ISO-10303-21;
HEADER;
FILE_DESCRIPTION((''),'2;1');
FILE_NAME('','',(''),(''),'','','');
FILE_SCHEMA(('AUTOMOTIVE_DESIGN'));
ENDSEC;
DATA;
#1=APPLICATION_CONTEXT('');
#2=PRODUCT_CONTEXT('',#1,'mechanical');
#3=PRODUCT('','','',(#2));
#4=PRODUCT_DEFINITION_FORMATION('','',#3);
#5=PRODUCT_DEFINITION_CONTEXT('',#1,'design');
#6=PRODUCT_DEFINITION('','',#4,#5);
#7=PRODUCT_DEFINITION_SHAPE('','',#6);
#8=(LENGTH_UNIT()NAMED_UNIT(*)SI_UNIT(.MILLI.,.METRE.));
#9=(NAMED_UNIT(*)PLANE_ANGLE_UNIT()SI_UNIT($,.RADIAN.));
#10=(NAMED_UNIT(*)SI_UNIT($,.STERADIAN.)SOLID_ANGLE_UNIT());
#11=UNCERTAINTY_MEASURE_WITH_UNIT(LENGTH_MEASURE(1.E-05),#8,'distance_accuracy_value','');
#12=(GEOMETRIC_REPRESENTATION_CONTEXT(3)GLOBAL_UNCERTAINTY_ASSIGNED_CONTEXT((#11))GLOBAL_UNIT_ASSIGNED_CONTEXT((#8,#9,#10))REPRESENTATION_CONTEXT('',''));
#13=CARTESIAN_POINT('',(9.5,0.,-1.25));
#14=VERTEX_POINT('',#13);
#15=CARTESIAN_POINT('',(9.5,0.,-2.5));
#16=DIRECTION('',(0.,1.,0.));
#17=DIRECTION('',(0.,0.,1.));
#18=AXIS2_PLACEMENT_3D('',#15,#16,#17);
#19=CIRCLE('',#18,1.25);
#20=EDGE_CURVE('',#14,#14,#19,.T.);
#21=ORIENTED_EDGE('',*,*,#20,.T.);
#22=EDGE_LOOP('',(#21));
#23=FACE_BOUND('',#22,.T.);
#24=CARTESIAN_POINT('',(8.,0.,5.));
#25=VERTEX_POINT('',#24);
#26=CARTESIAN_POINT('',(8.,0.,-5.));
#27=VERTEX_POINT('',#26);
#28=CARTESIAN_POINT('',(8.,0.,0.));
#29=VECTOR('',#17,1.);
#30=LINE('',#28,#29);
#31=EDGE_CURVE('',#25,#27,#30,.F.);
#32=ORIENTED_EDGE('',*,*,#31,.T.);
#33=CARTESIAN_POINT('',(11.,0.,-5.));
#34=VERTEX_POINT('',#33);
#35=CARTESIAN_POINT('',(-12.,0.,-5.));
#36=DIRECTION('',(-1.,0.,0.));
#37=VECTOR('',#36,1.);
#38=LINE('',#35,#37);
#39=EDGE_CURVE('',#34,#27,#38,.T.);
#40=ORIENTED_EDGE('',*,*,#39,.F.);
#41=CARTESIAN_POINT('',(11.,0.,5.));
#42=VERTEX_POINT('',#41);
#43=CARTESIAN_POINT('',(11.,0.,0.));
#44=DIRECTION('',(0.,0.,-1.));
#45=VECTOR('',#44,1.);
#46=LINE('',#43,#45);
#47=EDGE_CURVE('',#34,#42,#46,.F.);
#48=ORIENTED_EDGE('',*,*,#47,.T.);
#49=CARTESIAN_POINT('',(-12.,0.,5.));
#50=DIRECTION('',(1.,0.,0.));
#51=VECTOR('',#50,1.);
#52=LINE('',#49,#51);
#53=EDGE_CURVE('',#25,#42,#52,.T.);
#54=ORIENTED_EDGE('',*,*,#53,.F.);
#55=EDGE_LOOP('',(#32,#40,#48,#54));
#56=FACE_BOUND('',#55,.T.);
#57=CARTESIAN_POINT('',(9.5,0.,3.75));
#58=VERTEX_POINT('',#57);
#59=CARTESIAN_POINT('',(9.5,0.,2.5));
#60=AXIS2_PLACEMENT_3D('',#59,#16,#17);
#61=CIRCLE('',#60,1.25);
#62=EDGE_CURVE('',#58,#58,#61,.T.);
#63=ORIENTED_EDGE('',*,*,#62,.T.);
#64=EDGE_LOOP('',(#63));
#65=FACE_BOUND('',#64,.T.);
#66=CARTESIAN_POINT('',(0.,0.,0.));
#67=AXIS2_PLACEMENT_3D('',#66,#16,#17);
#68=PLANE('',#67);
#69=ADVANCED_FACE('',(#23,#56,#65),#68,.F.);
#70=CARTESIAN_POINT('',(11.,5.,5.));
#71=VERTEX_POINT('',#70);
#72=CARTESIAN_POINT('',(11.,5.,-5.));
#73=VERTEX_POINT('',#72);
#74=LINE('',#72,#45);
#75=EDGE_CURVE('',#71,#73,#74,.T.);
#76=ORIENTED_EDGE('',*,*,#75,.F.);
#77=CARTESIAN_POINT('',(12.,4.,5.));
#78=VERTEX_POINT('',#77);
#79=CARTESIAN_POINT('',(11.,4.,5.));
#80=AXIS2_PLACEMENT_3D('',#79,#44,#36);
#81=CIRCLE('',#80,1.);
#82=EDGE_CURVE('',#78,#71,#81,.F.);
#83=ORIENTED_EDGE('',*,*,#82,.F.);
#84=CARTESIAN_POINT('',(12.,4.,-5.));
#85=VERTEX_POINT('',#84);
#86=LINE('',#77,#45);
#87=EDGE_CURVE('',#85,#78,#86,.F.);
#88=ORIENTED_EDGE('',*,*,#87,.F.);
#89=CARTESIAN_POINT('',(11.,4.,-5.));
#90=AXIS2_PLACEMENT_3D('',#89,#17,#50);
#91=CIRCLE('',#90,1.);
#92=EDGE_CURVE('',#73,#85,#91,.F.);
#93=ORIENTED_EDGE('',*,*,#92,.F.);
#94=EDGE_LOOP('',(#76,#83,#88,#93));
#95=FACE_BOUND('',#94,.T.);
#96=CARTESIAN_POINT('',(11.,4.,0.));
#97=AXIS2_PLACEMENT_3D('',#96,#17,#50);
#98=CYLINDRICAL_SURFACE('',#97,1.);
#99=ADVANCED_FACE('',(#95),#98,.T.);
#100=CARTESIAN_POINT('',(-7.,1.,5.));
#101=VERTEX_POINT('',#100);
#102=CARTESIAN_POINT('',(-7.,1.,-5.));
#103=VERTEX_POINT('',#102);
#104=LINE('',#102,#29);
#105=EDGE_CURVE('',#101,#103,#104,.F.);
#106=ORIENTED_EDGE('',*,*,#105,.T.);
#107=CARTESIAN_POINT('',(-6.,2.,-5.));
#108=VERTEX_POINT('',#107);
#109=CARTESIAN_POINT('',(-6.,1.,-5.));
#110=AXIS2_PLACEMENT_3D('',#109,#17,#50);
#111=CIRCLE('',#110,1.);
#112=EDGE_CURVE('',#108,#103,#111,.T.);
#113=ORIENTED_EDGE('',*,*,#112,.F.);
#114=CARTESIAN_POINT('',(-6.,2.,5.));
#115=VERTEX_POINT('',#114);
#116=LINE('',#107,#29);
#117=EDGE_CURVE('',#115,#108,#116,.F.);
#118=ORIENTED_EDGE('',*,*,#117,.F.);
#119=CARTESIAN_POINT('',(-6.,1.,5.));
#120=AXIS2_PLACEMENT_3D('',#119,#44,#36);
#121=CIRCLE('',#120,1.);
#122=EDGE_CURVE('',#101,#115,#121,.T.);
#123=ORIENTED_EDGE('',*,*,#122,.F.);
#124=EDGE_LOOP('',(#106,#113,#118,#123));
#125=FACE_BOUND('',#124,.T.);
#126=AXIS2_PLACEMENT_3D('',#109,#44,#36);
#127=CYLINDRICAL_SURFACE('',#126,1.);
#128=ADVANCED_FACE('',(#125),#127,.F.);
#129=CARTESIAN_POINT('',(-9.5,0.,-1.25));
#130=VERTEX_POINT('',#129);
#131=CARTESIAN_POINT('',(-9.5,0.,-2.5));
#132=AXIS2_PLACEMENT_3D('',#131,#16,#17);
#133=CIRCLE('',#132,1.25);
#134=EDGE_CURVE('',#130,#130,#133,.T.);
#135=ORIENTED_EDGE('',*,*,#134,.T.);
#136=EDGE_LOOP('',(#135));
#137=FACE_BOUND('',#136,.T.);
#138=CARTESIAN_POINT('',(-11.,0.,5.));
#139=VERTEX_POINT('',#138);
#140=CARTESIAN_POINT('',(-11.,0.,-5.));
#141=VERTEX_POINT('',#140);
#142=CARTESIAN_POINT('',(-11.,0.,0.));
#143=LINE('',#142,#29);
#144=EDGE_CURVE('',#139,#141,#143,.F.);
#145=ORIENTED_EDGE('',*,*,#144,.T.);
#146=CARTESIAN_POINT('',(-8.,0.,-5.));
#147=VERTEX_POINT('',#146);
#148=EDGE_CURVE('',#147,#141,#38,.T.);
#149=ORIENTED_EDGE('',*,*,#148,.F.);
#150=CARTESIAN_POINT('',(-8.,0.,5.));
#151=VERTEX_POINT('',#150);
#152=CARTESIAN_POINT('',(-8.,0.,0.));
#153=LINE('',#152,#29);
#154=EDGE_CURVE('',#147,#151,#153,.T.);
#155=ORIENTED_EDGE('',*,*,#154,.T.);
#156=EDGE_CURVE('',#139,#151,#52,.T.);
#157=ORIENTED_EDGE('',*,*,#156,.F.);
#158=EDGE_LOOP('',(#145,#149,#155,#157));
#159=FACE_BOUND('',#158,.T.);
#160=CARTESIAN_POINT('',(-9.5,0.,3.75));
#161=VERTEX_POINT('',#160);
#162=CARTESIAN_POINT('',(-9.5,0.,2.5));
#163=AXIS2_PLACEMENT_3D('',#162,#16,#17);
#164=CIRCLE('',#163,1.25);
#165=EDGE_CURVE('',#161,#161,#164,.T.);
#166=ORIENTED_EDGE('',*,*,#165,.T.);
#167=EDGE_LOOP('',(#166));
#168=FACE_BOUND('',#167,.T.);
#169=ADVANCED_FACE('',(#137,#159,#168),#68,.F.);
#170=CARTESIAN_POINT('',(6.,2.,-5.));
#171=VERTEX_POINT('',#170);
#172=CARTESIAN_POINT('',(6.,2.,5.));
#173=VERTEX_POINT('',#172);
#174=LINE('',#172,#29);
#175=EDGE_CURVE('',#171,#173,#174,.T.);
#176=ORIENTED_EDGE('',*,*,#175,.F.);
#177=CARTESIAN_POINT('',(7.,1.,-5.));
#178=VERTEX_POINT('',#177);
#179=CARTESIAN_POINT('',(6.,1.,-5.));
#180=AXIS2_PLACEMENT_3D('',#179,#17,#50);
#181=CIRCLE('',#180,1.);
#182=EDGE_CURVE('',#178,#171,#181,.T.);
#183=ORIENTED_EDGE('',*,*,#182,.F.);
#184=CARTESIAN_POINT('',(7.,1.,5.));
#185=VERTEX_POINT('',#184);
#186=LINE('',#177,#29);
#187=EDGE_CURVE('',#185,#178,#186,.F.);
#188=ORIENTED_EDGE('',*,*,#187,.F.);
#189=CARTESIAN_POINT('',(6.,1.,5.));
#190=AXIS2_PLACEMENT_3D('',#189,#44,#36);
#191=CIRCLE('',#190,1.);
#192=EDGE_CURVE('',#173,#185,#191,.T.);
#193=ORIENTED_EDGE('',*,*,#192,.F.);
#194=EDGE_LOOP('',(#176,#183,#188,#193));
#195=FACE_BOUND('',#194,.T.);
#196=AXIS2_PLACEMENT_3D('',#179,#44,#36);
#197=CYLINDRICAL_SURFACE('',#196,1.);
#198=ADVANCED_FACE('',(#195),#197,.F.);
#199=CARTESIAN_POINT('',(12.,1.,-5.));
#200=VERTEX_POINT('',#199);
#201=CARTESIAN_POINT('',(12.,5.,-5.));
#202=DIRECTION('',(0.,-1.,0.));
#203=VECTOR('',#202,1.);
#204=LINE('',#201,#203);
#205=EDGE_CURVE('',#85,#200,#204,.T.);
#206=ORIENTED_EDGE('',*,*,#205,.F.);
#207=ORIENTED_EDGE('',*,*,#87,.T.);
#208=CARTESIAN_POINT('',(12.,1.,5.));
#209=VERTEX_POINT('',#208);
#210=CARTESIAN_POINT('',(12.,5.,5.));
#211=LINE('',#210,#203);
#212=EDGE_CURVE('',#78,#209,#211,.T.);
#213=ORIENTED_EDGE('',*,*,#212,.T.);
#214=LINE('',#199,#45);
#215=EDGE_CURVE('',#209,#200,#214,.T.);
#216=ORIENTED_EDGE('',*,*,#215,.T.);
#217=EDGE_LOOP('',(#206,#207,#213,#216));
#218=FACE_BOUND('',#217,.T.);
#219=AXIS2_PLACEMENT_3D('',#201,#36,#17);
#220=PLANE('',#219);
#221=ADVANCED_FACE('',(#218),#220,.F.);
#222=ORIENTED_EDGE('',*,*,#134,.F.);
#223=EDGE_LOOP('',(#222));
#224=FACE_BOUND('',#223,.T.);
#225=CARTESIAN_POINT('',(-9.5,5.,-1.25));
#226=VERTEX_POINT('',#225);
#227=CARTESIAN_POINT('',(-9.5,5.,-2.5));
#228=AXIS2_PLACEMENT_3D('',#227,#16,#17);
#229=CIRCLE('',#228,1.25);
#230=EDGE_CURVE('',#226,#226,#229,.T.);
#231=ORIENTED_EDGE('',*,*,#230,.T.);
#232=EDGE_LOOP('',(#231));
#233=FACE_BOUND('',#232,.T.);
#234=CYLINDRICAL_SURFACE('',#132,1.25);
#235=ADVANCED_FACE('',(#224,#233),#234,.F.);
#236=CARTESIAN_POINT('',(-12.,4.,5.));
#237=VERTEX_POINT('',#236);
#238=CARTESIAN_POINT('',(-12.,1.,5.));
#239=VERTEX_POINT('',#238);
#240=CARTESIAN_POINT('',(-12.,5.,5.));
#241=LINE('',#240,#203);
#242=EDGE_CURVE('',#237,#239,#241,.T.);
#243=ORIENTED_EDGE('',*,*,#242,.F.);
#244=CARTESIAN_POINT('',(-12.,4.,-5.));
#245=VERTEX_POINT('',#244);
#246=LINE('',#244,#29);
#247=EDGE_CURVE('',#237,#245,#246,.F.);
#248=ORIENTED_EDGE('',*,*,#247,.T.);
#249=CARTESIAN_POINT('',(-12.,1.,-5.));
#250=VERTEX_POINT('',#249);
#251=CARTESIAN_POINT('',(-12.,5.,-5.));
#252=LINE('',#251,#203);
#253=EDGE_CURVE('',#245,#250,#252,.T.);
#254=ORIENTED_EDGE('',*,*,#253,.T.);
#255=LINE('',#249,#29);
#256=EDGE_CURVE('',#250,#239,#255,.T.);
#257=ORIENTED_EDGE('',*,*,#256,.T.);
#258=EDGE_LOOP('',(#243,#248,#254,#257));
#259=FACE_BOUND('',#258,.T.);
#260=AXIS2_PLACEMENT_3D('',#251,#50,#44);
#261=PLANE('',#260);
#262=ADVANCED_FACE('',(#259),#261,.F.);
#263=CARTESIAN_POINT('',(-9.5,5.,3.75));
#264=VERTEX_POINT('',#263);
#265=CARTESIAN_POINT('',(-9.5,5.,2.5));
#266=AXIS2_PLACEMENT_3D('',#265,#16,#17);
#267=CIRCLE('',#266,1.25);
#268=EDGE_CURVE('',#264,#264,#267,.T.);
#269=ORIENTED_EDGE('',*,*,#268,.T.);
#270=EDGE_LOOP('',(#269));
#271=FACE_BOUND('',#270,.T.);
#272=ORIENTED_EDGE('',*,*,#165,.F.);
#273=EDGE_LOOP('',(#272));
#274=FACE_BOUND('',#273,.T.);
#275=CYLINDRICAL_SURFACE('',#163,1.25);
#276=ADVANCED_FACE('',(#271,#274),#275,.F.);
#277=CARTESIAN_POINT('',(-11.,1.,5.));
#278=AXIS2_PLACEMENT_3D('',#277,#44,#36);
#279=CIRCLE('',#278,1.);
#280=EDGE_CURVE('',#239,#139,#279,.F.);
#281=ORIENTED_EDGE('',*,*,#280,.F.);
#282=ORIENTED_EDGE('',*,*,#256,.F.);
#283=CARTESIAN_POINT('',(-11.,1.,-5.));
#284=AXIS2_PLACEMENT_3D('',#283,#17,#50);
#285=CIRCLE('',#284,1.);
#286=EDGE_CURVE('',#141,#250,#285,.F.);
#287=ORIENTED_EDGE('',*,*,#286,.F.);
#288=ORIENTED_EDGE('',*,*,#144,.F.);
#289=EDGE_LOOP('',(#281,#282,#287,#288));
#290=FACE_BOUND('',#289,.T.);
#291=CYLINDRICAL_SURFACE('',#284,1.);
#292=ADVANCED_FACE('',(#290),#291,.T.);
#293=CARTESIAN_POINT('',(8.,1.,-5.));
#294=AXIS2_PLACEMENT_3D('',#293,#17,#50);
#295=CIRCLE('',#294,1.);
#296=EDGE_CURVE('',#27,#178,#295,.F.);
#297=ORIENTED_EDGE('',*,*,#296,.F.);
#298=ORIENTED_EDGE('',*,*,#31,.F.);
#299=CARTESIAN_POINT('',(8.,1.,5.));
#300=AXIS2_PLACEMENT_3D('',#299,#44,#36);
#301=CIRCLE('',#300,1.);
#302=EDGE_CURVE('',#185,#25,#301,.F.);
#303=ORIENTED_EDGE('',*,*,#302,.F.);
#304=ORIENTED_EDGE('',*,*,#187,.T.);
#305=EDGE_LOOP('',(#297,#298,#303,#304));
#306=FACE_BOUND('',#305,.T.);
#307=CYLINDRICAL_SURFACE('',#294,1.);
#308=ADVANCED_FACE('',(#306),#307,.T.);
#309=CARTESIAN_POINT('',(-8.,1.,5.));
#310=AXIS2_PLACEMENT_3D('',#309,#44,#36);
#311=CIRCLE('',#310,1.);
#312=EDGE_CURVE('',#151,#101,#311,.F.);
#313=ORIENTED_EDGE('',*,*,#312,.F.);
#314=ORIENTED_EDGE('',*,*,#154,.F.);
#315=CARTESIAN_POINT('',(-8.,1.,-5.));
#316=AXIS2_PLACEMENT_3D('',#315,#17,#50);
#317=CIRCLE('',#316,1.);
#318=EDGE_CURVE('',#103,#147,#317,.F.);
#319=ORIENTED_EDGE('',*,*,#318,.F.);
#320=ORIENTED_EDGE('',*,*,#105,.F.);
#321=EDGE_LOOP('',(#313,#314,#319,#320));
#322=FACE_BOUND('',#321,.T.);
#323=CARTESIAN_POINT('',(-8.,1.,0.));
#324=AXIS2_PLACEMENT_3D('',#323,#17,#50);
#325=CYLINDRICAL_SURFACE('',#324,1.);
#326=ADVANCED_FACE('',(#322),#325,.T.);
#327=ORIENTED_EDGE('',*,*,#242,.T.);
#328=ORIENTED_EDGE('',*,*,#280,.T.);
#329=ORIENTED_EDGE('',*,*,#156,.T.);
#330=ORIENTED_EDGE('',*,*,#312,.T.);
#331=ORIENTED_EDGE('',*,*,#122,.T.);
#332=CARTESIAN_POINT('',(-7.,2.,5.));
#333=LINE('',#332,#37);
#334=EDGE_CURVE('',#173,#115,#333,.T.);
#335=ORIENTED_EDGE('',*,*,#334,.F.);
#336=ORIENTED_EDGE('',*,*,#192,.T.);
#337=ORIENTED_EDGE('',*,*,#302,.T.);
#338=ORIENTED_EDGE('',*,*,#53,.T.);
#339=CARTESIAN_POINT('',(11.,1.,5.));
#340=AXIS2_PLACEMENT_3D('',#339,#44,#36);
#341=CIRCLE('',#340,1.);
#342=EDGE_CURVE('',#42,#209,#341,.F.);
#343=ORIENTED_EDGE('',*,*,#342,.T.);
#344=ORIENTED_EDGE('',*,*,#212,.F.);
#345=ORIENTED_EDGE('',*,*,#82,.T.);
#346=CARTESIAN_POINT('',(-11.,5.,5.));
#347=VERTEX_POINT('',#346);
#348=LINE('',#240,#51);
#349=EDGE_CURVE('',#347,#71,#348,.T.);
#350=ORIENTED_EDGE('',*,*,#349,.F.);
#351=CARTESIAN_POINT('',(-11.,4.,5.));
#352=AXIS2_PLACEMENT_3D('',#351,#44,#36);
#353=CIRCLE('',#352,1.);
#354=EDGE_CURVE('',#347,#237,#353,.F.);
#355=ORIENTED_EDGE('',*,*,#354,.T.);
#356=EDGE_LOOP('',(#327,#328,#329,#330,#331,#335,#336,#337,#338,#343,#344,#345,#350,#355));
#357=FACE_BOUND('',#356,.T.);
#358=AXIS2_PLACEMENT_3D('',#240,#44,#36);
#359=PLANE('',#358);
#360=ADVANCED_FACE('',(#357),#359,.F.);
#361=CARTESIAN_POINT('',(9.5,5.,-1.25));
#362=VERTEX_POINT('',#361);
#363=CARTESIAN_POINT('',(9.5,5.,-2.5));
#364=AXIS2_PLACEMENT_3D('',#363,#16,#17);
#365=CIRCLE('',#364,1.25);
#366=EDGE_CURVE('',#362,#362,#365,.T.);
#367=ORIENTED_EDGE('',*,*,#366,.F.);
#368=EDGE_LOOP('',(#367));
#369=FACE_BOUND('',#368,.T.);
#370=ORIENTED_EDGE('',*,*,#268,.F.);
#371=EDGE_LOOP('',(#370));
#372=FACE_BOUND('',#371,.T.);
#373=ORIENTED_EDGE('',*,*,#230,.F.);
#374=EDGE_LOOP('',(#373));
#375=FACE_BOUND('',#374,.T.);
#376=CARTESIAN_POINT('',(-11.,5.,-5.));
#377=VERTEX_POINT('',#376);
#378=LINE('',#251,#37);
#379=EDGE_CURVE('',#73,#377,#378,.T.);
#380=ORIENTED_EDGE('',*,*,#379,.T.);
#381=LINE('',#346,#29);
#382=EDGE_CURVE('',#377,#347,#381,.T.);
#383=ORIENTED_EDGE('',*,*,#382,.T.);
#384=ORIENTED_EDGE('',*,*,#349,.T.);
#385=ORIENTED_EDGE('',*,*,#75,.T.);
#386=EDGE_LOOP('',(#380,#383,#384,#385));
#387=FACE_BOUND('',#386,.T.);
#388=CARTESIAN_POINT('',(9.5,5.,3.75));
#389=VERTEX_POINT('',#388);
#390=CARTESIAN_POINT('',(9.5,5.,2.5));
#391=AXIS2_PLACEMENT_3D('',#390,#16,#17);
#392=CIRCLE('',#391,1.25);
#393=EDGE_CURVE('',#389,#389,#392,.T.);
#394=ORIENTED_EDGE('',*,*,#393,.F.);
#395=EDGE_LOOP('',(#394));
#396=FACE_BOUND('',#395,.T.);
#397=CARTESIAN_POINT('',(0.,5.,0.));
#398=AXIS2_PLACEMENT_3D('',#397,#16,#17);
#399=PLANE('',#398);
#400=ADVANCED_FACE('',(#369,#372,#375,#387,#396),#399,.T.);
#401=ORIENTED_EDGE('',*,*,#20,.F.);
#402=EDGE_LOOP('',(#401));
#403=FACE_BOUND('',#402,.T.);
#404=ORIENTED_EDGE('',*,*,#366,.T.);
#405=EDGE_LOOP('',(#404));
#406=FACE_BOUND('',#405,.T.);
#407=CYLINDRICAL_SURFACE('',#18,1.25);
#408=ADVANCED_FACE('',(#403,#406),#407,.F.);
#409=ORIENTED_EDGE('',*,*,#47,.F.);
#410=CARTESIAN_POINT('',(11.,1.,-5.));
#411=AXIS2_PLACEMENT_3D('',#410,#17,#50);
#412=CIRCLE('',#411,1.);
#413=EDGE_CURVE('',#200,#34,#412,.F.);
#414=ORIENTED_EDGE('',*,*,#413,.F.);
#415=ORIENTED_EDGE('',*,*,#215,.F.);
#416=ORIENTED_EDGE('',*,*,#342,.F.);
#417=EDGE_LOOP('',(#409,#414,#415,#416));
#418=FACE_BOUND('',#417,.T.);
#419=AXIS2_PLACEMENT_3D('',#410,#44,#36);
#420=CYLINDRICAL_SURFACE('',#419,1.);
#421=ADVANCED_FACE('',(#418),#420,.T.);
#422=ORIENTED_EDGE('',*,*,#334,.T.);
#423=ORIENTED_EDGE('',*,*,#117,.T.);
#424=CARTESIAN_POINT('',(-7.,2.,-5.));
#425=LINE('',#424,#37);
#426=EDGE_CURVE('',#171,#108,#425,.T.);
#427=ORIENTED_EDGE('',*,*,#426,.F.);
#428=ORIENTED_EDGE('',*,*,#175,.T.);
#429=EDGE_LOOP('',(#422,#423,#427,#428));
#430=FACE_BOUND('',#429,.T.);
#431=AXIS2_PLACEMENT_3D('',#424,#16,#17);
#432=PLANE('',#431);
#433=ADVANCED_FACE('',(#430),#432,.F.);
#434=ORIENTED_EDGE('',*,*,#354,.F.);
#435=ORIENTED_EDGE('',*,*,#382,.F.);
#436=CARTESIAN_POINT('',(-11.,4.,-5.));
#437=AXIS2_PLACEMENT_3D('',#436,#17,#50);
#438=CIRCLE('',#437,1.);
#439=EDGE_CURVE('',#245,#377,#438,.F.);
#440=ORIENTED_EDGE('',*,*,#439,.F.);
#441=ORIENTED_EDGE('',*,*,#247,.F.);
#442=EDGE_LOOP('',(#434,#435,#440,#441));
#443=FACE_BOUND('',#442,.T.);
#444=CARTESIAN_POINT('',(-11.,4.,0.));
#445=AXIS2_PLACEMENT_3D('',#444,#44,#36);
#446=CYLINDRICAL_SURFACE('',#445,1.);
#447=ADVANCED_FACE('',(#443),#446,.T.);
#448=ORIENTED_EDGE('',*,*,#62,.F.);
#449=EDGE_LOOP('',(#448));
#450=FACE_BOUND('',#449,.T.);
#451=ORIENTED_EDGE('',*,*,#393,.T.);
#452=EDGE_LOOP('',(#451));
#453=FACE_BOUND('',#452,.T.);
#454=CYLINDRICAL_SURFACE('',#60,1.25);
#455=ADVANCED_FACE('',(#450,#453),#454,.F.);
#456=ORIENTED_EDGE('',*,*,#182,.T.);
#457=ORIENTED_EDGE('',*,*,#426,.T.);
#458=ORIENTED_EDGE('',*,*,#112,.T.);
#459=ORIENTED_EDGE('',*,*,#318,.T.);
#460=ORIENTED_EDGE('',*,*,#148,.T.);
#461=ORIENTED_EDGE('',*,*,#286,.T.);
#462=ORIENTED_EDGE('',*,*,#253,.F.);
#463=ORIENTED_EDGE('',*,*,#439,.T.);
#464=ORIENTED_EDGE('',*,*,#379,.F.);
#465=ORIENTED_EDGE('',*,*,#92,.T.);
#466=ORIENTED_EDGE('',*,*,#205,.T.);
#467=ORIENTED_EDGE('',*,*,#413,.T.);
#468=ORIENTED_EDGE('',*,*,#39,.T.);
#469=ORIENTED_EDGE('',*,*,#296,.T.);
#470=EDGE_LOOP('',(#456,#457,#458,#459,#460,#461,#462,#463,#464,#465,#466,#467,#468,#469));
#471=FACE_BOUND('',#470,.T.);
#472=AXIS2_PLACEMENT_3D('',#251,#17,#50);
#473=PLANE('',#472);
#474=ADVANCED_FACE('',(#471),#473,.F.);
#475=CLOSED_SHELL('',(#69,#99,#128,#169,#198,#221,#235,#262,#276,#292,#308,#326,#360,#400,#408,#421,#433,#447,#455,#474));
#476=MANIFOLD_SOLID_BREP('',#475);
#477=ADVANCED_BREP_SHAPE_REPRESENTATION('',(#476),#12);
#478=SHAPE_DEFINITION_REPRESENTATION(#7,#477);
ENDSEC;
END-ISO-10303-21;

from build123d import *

# Parameters (mm, degrees)
SKETCH1_W           = 24
SKETCH1_H           = 10
BOSS_EXTRUDE1_DEPTH = 5
SKETCH2_W           = 14
SKETCH2_H           = 2
CUT_EXTRUDE1_DEPTH  = 17.401219467
FILLET1_R           = 1
SKETCH3_R           = 1.25
CUT_EXTRUDE2_DEPTH  = 14.928388277


with BuildPart() as part:
    # Sketch1 → Boss-Extrude1 (new body)
    with BuildSketch(Plane(origin=(0, 0, 0), x_dir=(1, 0, 0), z_dir=(0, 1, 0))):
        Rectangle(SKETCH1_W, SKETCH1_H)
    extrude(amount=BOSS_EXTRUDE1_DEPTH)

    # Sketch2 → Cut-Extrude1 (cut, through all)
    with BuildSketch(Plane.XY.offset(5)):
        with Locations((0, 1)):
            Rectangle(SKETCH2_W, SKETCH2_H)
    extrude(amount=-CUT_EXTRUDE1_DEPTH, mode=Mode.SUBTRACT)

    # Fillet1
    fillet1_edges = [part.edges().sort_by_distance(p)[0] for p in [
        (-12, 0, 0),
        (-12, 5, 0),
        (12, 5, 0),
        (12, 0, 0),
        (7, 0, 0),
        (7, 2, 0),
        (-7, 2, 0),
        (-7, 0, 0),
    ]]
    fillet(fillet1_edges, radius=FILLET1_R - 0.0001)  # a hair under: the kernel refuses the full size

    # Sketch3 → Cut-Extrude2 (cut, through all)
    with BuildSketch(Plane(origin=(0, 5, 0), x_dir=(1, 0, 0), z_dir=(0, 1, 0))):
        with Locations(Location((-9.5, 2.5, 0), (0, 0, 270))):
            Circle(SKETCH3_R)
        with Locations(Location((9.5, 2.5, 0), (0, 0, 270))):
            Circle(SKETCH3_R)
        with Locations(Location((-9.5, -2.5, 0), (0, 0, 270))):
            Circle(SKETCH3_R)
        with Locations(Location((9.5, -2.5, 0), (0, 0, 270))):
            Circle(SKETCH3_R)
    extrude(amount=-CUT_EXTRUDE2_DEPTH, mode=Mode.SUBTRACT)


solid = part.part
